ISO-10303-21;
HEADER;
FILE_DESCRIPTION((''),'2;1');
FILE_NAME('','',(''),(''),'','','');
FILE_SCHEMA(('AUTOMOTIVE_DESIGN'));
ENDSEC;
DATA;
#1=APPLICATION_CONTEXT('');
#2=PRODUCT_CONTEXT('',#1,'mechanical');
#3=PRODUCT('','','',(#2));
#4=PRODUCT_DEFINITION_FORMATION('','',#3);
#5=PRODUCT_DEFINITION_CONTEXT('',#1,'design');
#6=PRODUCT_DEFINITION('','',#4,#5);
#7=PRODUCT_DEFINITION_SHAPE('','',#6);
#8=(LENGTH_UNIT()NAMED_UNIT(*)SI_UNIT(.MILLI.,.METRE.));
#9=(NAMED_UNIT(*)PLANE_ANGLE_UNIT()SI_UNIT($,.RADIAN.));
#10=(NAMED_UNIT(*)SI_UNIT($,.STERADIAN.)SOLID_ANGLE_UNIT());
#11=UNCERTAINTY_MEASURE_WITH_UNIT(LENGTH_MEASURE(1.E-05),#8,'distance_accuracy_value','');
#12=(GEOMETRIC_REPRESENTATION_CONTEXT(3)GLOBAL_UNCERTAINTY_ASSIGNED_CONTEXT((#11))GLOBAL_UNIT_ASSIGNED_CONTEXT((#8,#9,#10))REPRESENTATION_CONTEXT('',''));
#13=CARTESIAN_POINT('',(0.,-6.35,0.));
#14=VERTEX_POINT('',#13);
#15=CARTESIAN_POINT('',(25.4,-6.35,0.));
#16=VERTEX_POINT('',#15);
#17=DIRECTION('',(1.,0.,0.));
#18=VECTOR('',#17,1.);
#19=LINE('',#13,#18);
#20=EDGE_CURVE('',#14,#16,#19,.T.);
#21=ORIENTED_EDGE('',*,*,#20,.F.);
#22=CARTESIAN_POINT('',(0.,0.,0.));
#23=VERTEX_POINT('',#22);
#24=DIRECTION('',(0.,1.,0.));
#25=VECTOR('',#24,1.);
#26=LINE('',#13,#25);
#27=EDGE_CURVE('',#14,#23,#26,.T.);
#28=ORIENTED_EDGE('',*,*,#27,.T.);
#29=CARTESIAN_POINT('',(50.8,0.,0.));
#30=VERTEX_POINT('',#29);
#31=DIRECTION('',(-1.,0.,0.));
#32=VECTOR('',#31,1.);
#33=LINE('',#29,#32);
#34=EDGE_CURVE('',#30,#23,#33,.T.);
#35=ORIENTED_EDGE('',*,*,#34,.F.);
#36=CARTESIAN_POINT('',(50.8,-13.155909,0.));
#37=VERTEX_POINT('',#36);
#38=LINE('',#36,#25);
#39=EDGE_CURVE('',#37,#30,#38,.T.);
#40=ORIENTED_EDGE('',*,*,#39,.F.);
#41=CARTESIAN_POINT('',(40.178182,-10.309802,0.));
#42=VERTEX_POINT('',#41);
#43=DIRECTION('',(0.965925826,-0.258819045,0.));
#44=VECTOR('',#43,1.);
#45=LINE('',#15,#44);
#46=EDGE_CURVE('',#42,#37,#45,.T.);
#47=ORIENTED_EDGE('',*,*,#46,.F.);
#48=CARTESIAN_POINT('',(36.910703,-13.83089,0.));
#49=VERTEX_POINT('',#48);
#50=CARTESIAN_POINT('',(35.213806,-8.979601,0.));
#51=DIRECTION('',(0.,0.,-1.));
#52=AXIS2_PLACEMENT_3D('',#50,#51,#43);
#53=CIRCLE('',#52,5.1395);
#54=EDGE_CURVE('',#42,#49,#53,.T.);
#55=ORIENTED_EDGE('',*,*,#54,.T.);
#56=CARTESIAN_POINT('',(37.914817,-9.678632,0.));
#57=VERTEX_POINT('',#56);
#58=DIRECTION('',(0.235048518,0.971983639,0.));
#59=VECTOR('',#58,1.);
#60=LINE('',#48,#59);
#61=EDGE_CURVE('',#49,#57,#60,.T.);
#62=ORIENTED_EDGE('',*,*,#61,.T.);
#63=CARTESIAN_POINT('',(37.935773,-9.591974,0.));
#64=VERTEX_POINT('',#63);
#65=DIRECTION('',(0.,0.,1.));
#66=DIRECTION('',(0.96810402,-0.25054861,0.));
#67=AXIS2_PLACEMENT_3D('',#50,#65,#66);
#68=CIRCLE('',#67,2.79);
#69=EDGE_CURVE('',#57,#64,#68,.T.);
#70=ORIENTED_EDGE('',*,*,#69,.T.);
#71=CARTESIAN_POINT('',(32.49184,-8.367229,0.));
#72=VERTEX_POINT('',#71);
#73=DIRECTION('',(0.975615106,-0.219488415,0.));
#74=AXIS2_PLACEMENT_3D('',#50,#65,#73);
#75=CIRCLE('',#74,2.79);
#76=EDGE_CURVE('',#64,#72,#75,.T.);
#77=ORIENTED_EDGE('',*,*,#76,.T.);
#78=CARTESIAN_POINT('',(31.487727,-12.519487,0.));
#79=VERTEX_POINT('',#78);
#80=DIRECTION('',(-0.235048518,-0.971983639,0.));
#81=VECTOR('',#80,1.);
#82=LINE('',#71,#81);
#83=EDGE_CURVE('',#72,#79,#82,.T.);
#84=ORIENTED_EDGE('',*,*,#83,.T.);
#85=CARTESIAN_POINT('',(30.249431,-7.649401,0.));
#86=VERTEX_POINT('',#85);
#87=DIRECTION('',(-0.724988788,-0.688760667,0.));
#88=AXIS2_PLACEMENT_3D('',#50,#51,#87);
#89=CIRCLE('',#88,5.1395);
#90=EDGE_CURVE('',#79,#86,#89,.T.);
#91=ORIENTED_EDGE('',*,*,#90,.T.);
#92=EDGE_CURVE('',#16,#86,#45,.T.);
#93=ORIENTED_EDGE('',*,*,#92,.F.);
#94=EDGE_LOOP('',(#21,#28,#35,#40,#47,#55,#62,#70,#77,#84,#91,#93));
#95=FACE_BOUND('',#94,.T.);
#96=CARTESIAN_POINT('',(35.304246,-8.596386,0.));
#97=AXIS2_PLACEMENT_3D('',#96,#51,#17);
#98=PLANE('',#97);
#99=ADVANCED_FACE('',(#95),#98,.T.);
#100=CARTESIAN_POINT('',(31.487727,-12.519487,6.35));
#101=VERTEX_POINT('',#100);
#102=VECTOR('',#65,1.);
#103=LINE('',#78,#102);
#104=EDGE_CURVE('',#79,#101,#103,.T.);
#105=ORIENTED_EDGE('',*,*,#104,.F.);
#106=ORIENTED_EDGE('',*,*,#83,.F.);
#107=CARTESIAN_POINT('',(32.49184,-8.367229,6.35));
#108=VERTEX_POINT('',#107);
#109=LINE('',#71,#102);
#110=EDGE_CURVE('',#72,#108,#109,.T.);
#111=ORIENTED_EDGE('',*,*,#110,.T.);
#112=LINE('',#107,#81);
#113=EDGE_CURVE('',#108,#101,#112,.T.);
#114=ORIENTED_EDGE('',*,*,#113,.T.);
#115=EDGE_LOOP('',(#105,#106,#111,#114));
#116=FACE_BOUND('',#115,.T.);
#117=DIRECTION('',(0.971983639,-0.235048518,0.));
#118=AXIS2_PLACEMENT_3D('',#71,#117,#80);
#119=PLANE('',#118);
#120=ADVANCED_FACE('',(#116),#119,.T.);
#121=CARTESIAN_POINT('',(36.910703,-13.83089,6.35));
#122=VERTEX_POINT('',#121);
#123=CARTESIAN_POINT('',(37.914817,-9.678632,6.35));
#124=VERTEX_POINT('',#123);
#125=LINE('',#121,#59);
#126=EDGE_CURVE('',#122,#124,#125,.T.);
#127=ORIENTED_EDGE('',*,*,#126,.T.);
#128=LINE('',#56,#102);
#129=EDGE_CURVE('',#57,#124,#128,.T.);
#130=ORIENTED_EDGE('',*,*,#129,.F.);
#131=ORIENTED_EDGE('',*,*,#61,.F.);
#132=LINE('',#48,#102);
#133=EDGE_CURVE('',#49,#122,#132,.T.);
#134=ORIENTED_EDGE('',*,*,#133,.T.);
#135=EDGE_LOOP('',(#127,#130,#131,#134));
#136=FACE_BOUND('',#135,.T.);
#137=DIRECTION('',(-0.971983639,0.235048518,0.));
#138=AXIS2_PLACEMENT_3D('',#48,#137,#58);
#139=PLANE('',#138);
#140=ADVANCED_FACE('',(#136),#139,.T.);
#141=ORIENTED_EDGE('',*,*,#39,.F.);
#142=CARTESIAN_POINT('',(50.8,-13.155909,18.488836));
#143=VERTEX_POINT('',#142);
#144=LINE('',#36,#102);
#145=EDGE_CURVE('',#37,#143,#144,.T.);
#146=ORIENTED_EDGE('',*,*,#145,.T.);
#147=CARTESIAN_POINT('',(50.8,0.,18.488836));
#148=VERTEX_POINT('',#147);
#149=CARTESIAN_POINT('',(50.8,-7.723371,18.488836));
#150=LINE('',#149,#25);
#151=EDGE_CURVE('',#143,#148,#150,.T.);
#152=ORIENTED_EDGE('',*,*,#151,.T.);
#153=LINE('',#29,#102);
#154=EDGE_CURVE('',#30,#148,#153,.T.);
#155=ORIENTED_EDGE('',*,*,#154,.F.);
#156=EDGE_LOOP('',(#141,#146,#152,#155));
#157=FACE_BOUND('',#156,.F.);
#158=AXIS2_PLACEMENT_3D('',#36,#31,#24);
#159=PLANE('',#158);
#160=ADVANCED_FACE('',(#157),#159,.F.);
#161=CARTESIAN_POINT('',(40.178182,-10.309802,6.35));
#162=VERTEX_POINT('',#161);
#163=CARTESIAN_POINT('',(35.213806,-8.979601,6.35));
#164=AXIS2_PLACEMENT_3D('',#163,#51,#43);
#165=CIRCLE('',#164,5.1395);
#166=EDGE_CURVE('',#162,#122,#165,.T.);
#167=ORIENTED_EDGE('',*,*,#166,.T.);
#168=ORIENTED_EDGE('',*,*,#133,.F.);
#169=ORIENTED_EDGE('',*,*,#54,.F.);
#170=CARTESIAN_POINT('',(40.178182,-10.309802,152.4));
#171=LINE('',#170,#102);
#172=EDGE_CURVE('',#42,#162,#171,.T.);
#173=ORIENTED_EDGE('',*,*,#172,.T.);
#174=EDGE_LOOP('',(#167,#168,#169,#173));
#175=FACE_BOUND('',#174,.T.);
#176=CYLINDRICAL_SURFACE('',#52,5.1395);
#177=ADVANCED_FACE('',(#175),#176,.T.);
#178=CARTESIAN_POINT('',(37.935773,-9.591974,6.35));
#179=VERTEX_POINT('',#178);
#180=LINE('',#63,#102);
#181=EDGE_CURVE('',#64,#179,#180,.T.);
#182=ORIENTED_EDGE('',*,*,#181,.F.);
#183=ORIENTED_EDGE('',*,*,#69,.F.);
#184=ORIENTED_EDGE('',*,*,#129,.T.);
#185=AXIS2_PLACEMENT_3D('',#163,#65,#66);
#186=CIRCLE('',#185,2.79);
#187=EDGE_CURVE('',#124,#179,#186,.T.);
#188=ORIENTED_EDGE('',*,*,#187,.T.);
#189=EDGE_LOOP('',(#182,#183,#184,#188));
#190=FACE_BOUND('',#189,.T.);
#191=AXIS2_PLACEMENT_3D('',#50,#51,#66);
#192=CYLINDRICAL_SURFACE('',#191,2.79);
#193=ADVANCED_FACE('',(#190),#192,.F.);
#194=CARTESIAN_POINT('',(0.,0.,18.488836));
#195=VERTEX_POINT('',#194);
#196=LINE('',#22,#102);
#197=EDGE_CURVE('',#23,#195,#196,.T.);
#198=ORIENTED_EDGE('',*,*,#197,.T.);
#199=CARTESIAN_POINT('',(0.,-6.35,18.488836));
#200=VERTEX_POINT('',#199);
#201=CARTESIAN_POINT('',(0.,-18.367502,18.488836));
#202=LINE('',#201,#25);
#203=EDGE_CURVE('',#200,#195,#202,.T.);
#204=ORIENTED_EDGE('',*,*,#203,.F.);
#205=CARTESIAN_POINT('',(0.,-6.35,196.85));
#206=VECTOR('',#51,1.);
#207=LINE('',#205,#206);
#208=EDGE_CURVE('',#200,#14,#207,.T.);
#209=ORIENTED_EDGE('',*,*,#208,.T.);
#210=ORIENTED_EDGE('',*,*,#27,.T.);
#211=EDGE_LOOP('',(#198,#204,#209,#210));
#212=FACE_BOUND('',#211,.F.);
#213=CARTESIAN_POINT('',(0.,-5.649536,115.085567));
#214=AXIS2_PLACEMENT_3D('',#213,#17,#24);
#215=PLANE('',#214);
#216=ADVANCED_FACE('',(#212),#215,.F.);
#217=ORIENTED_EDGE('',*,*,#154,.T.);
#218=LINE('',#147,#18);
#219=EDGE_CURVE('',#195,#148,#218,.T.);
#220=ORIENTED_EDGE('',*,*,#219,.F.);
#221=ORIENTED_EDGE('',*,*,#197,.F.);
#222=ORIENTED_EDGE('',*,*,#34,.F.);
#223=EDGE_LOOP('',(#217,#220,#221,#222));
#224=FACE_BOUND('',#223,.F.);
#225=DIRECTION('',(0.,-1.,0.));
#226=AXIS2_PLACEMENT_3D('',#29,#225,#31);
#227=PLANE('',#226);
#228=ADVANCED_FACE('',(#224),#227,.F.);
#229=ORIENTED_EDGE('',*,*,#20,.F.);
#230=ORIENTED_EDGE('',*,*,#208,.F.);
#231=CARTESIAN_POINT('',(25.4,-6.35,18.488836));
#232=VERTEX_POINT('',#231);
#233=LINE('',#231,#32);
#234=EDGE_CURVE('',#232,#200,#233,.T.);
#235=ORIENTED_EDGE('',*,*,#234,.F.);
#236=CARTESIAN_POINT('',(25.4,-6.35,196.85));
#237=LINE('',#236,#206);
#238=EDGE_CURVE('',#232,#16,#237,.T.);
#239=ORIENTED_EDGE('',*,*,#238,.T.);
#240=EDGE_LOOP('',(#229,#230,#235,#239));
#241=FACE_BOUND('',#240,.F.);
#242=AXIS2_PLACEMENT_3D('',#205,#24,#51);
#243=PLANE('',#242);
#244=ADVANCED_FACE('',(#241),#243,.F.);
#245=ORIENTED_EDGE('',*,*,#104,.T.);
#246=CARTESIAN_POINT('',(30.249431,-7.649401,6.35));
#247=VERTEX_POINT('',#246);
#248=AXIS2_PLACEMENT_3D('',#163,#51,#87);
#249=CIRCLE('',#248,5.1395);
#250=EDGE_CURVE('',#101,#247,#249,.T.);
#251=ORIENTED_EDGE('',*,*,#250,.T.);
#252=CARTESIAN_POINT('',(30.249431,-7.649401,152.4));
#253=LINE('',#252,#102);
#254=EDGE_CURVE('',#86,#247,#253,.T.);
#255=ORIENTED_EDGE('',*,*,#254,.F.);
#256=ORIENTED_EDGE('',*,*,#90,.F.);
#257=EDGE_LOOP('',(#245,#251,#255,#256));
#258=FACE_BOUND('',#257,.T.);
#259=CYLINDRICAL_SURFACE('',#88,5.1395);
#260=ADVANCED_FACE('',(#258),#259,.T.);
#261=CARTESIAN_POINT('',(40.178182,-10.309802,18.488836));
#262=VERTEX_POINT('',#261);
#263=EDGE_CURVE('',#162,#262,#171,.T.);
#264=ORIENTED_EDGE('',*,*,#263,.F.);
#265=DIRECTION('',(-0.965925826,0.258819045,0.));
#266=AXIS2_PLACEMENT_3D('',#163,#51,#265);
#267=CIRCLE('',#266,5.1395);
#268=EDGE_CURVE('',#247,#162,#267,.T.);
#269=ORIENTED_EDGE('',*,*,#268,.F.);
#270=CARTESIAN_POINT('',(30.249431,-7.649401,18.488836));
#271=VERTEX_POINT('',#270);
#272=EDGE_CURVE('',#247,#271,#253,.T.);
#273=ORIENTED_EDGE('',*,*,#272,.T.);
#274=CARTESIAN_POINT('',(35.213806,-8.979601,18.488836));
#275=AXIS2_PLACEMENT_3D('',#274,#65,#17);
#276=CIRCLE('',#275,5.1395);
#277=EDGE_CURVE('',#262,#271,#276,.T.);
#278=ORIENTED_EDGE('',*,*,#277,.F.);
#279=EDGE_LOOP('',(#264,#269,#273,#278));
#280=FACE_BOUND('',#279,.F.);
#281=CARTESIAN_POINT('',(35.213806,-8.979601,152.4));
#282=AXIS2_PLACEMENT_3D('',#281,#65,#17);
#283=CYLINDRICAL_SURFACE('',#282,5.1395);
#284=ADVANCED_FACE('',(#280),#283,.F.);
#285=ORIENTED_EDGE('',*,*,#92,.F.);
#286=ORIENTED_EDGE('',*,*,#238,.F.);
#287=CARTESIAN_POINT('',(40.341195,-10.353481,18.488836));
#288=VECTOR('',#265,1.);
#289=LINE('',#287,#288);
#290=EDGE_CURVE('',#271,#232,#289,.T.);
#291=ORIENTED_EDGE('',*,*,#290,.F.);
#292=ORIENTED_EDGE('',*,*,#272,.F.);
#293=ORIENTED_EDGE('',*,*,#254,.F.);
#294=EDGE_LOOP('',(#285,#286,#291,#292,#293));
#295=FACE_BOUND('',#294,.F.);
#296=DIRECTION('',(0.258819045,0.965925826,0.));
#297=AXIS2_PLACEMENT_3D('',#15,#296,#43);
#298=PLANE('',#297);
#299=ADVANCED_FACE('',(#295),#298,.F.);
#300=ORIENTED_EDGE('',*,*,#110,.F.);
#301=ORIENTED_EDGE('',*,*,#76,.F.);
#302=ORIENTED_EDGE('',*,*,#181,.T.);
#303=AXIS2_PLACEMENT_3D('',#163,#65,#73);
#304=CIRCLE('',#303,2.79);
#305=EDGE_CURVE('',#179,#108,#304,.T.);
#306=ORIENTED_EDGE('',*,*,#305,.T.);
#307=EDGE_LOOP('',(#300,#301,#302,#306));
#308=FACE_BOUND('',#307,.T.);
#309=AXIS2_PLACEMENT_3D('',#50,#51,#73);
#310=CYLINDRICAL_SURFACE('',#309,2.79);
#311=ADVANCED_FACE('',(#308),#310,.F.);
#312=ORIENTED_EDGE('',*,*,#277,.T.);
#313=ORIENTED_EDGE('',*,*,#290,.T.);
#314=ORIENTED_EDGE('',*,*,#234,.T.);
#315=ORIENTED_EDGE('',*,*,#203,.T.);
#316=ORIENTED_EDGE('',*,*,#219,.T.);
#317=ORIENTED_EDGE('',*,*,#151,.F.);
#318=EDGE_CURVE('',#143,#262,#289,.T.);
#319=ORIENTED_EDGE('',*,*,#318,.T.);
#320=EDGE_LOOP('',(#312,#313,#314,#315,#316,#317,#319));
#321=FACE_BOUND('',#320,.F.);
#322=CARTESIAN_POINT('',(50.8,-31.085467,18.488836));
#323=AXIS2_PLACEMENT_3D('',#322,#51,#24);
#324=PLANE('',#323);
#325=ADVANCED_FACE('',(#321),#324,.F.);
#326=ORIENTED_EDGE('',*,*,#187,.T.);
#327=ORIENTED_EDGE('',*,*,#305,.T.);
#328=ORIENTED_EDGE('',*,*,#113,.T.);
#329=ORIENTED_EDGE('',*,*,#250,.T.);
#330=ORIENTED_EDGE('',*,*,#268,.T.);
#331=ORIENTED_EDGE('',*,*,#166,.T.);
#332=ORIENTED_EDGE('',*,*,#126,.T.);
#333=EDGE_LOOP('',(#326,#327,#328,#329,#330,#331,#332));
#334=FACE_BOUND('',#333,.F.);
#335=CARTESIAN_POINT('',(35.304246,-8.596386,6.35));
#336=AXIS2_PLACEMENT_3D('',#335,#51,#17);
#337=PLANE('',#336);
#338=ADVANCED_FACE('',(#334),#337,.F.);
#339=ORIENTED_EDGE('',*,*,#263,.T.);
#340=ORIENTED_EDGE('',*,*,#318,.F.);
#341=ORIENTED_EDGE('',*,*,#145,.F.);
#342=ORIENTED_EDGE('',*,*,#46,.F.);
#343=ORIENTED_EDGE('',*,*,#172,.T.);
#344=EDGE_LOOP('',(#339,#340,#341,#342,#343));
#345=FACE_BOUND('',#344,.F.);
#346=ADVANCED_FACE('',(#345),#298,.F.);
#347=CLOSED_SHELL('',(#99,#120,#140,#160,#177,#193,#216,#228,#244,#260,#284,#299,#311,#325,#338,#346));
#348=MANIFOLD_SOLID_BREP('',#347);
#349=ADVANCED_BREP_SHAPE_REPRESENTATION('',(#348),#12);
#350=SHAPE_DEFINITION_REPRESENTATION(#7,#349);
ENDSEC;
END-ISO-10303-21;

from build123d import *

# Parameters (mm, degrees)
F1_DEPTH  = 25.4
F3_DEPTH  = 152.4
F4_R      = 5.1395
F5_DEPTH  = 152.401
F7_DEPTH  = 6.096
F9_DEPTH  = 6.35
F10_R     = 1.905
F11_DEPTH = 6.35
F12_W     = 46.7241909355
F12_H     = 189.791161567
F13_DEPTH = 50.801


with BuildPart() as f1:
    # F0 (on Right) → F1 (new body)
    with BuildSketch(Plane.YZ):
        Polygon((-6.35, 0), (0, 0), (0, 203.2), (-24.13, 203.2), (-24.13, 177.8), (-17.78, 177.8), (-17.78, 196.85), (-6.35, 196.85), align=None)
    extrude(amount=F1_DEPTH)

    # F2 (on Top) → F3 (join)
    with BuildSketch(Plane.XY):
        Polygon((50.8, 0), (25.4, 0), (25.4, -6.35), (50.8, -13.1559094878), align=None)
    extrude(amount=F3_DEPTH)

    # F4 (on face) → F5 (cut, through all)
    with BuildSketch(Plane.XY.offset(152.4)):
        with Locations((35.2138063951, -8.9796014982)):
            Circle(F4_R)
    extrude(amount=-F5_DEPTH, mode=Mode.SUBTRACT)

    # F6 (on face) → F7 (cut)
    with BuildSketch(Plane.YZ.offset(50.8)):
        Polygon((-9.3719547439, 71.3606500437), (-3.7839547439, 71.3606500437), (-0.9899547439, 76.2), (-3.7839547439, 81.0393499563), (-9.3719547439, 81.0393499563), (-12.1659547439, 76.2), align=None)
    extrude(amount=-F7_DEPTH, mode=Mode.SUBTRACT)

    # F8 (on face) → F9 (join)
    with BuildSketch(Plane(origin=(0, 0, 0), x_dir=(1, 0, 0), z_dir=(0, 0, -1))):
        with BuildLine():
            Line((32.4918402484, 8.3672288206), (31.4877265179, 12.5194869482))
            ThreePointArc((31.4877265179, 12.5194869482), (30.2327985505, 10.2461010452), (30.2494306109, 7.6494010159))
            ThreePointArc((30.2494306109, 7.6494010159), (36.5440068774, 4.015225714), (40.1781821793, 10.3098019805))
            ThreePointArc((40.1781821793, 10.3098019805), (38.9811201217, 12.4755716834), (36.9107028801, 13.8308902517))
            Line((36.9107028801, 13.8308902517), (37.9148166106, 9.678632124))
            ThreePointArc((37.9148166106, 9.678632124), (37.9256407477, 9.6353868624), (37.9357725418, 9.5919741759))
            ThreePointArc((37.9357725418, 9.5919741759), (35.8261790728, 6.2576353516), (32.4918402484, 8.3672288206))
        make_face()
    extrude(amount=-F9_DEPTH)

    # F10 (on face) → F11 (join)
    with BuildSketch(Plane(origin=(0.1139773719, 0.425369343, 0), x_dir=(0.9659258263, -0.2588190451, 0), z_dir=(-0.2588190451, -0.9659258263, 0))):
        with Locations((45.3620319066, 149.352)):
            Circle(F10_R)
        with Locations((49.4260319066, 145.288)):
            Circle(F10_R)
    extrude(amount=F11_DEPTH)

    # F12 (on face) → F13 (cut, through all)
    with BuildSketch(Plane.YZ.offset(50.8)):
        with Locations((-7.7233714983, 113.3844163269)):
            Rectangle(F12_W, F12_H)
    extrude(amount=-F13_DEPTH, mode=Mode.SUBTRACT)


solid = f1.part
